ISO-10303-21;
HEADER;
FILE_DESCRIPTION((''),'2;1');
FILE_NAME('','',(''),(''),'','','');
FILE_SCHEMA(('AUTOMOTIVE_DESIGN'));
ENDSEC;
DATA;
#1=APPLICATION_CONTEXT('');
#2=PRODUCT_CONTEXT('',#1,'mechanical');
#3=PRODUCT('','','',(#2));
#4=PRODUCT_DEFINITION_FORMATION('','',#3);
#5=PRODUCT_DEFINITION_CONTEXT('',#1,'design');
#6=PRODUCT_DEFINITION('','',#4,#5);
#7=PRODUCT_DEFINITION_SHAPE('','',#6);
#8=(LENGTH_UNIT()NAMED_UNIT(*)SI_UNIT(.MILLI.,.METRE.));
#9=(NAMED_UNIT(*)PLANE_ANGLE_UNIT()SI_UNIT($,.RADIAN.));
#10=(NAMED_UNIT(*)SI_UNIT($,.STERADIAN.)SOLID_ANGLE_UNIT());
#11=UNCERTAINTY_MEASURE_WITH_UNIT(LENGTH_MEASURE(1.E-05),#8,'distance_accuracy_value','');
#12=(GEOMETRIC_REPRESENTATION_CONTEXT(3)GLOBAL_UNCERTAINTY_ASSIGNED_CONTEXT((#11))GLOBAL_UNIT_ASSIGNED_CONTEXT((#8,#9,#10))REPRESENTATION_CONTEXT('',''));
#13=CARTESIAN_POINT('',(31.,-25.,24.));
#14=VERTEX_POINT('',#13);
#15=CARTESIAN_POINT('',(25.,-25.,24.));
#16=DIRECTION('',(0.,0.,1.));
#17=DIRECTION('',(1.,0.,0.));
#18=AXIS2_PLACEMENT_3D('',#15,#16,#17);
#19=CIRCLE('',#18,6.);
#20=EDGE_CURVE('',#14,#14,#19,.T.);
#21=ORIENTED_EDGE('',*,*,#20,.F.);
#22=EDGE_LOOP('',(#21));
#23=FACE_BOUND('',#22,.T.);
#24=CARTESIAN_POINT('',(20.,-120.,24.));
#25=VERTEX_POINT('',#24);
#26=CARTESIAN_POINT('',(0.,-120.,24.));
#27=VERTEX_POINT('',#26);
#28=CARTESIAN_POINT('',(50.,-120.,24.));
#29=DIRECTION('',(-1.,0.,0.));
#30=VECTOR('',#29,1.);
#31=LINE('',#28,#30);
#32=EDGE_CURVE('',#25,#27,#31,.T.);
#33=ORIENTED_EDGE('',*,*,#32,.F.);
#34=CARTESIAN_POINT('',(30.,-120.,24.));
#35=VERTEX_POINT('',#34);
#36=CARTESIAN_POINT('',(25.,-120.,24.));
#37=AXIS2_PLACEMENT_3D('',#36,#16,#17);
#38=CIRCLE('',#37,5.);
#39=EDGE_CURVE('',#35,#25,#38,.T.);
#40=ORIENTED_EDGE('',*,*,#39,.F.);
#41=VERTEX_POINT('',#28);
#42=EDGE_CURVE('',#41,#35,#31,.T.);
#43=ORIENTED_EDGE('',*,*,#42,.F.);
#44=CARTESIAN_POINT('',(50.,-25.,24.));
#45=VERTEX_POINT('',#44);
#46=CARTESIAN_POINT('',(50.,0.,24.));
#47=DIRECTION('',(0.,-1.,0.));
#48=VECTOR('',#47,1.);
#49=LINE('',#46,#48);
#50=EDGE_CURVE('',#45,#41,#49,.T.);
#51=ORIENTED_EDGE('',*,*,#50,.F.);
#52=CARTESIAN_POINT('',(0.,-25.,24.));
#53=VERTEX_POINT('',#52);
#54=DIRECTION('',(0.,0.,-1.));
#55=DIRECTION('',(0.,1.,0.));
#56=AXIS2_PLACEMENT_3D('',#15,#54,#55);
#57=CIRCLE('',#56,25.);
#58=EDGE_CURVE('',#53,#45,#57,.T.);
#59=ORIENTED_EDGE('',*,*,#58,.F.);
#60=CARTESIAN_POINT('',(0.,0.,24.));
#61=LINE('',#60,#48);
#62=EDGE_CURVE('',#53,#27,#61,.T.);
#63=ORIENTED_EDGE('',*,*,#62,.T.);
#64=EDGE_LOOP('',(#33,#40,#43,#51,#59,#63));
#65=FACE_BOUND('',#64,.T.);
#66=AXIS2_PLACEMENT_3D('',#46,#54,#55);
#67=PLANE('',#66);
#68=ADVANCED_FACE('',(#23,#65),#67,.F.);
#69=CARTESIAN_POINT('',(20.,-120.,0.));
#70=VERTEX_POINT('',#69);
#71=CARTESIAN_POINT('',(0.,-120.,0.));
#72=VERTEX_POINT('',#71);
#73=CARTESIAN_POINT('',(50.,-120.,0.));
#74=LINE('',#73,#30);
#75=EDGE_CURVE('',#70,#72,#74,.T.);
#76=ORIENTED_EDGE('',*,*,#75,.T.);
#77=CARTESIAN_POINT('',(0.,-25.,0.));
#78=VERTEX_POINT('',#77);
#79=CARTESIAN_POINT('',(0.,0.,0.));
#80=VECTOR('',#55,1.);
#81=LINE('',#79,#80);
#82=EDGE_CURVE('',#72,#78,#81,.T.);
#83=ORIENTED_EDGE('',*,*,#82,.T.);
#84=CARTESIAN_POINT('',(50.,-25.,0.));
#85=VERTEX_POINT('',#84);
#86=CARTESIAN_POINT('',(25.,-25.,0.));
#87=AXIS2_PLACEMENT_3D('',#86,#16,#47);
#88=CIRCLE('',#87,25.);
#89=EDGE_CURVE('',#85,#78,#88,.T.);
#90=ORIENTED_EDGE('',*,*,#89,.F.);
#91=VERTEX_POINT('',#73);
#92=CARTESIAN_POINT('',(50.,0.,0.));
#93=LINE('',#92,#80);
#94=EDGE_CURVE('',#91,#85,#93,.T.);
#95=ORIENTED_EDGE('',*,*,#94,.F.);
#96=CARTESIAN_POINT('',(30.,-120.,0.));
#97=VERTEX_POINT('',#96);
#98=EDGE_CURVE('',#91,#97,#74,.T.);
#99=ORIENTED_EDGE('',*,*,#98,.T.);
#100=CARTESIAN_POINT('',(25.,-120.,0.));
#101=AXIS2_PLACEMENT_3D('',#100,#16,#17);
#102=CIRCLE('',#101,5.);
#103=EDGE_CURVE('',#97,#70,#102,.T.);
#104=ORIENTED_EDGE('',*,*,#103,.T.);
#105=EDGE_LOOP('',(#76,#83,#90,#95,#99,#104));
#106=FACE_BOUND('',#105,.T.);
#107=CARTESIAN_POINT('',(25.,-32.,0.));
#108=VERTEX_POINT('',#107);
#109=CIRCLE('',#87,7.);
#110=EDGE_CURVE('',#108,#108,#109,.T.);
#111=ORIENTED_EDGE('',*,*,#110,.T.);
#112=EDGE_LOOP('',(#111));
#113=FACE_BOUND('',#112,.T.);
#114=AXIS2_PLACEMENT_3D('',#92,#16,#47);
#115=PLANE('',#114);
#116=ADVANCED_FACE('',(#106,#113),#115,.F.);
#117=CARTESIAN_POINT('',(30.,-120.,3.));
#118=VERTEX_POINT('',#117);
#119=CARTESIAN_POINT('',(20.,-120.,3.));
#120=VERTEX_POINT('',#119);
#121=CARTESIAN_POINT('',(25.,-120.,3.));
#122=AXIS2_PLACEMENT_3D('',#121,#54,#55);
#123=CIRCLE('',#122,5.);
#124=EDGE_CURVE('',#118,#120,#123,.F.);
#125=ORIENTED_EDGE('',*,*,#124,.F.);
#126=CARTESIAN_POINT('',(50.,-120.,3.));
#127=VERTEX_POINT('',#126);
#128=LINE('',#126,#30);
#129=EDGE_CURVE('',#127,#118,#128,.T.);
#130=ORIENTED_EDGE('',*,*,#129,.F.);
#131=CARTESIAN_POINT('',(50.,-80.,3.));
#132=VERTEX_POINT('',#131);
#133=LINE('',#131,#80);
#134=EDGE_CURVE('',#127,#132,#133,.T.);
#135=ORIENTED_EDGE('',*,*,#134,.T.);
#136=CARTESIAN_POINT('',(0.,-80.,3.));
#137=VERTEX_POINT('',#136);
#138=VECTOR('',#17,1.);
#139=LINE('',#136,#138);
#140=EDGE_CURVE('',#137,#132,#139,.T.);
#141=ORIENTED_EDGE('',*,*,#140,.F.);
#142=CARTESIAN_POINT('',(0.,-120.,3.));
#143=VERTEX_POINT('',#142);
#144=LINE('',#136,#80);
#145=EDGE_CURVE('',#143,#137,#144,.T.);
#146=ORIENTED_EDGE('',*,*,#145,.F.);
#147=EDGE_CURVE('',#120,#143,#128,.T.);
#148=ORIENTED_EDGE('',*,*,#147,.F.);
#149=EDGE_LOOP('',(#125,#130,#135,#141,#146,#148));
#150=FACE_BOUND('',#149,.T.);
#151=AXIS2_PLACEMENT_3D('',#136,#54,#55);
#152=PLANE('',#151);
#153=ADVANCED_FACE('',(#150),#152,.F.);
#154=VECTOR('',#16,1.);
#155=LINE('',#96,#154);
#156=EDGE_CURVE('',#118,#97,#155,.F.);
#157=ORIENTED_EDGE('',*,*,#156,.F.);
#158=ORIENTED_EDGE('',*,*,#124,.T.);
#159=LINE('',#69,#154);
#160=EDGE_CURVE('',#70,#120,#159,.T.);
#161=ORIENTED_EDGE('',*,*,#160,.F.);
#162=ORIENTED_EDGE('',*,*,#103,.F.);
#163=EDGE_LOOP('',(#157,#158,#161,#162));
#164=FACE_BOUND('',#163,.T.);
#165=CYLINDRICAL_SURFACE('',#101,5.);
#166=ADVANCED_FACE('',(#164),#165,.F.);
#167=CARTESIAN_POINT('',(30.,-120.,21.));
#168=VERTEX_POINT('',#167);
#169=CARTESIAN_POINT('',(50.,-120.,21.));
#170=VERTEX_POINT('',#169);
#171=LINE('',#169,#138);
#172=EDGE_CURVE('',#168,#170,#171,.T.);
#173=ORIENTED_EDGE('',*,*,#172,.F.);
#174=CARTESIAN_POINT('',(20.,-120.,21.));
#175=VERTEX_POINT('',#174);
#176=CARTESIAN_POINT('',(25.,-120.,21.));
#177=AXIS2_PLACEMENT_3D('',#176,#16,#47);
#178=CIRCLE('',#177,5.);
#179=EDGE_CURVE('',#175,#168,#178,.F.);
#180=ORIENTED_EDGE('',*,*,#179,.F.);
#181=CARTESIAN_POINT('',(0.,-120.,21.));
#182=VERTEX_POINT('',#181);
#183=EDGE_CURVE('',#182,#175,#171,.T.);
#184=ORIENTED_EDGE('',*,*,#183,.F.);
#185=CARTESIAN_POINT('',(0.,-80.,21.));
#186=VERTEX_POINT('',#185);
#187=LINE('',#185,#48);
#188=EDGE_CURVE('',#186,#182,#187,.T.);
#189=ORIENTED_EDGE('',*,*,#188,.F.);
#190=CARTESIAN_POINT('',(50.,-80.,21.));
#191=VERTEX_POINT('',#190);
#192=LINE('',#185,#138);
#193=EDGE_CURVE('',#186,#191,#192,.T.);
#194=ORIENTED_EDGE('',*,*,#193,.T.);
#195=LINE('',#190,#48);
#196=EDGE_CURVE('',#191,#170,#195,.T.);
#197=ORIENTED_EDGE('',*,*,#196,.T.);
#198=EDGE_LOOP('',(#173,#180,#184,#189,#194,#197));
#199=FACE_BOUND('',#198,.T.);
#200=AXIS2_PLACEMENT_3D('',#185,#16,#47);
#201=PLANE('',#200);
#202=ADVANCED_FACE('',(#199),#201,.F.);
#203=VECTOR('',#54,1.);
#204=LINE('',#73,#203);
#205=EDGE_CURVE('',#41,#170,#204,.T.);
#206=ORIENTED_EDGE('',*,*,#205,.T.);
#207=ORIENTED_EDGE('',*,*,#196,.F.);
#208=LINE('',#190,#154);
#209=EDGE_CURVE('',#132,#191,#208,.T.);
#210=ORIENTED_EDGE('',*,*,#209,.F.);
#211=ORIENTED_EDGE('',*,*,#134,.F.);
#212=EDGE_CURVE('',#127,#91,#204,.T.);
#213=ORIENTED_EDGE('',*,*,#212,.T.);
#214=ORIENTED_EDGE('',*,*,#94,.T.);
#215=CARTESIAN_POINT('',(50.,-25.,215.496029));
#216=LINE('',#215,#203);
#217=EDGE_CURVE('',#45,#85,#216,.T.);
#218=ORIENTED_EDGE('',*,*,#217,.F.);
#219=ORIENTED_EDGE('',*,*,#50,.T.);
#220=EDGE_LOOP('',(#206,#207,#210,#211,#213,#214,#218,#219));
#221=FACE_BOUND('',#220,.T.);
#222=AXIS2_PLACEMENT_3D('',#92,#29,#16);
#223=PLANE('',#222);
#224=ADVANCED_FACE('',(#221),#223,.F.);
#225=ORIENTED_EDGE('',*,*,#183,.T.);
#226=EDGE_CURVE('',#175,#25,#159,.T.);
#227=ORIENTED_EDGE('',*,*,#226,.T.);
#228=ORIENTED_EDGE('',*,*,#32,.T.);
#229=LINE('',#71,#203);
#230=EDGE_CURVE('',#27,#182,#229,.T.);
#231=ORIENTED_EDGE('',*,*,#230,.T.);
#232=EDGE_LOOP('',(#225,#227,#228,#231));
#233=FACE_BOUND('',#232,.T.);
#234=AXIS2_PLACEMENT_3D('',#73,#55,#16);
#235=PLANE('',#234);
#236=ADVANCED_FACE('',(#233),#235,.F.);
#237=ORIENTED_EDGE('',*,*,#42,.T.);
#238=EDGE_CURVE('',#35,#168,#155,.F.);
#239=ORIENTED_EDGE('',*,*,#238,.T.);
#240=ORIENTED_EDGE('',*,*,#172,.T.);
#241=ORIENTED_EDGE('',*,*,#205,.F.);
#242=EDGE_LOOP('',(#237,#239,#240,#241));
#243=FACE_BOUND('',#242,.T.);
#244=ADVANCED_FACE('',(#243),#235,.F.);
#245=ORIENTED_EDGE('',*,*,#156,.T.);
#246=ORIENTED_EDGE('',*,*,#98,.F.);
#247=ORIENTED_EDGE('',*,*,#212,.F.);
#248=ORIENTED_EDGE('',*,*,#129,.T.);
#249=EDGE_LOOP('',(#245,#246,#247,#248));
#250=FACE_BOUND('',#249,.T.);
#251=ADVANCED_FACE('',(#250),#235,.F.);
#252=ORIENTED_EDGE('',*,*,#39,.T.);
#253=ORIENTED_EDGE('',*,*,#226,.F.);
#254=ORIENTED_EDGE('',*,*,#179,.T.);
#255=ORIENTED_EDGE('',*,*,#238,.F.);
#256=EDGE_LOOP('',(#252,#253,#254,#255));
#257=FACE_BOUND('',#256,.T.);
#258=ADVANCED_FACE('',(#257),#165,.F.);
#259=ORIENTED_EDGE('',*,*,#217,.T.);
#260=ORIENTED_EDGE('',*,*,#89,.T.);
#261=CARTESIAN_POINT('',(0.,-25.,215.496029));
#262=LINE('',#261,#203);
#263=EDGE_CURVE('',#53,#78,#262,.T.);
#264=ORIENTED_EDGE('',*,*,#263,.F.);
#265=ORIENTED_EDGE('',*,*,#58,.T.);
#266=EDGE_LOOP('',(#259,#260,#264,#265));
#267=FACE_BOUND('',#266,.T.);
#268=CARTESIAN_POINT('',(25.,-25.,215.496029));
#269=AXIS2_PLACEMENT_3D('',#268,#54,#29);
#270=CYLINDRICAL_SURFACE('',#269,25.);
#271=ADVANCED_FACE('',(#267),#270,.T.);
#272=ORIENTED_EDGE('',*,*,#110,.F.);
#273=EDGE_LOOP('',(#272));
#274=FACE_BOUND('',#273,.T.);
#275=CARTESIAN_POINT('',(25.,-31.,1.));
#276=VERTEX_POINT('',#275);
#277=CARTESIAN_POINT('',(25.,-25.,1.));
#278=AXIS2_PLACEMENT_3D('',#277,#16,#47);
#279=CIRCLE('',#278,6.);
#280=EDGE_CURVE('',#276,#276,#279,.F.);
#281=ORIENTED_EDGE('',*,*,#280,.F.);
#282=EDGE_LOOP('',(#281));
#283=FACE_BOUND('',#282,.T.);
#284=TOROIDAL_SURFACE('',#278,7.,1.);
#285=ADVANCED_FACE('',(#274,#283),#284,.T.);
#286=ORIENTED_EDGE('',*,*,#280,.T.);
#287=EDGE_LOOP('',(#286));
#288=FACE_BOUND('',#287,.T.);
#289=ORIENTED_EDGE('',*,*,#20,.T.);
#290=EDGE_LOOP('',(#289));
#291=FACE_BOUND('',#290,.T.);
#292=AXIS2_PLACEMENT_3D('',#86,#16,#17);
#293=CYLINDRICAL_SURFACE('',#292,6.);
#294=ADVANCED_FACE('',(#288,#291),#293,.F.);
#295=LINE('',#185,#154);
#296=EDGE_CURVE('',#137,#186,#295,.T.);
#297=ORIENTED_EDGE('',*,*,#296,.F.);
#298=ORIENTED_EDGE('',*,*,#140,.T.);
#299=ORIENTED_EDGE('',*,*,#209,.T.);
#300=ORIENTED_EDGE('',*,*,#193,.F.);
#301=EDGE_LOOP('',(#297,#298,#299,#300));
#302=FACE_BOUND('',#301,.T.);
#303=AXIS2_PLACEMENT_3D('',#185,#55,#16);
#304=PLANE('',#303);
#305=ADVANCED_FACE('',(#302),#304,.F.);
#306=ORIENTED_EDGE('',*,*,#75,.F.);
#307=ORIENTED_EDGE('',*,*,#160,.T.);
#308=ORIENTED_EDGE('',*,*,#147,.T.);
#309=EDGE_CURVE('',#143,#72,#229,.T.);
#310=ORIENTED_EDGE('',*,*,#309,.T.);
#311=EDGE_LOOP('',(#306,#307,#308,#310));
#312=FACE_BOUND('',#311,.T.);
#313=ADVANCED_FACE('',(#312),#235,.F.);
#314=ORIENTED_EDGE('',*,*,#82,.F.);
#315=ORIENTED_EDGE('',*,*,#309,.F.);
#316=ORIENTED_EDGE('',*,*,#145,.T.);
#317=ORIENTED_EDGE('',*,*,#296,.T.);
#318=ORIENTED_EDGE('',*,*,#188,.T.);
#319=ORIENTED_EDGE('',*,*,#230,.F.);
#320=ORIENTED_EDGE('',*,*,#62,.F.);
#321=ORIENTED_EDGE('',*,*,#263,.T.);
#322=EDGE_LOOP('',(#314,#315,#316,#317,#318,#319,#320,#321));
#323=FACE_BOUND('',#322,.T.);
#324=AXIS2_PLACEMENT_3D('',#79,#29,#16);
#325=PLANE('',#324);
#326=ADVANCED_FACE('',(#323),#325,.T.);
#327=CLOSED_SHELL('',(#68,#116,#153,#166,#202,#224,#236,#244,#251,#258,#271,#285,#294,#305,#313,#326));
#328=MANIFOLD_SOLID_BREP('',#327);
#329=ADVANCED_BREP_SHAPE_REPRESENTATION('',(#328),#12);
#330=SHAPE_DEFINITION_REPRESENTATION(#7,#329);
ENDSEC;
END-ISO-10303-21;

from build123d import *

# Parameters (mm, degrees)
SKETCH1_W           = 24
SKETCH1_H           = 120
BOSS_EXTRUDE1_DEPTH = 50
SKETCH3_R           = 6
CUT_EXTRUDE1_DEPTH  = 133.196822957
SKETCH5_R           = 5
CUT_EXTRUDE4_DEPTH  = 133.196822957
SKETCH4_W           = 18
SKETCH4_H           = 80
CUT_EXTRUDE5_DEPTH  = 133.196822957
CUT_EXTRUDE7_START  = -24
CUT_EXTRUDE7_DEPTH  = 24
FILLET2_R           = 1


# Read off the part's stored shape, not the designer's step: Cut-Extrude7
with BuildPart() as part:
    # Sketch1 → Boss-Extrude1 (new body)
    with BuildSketch(Plane(origin=(0, 0, 0), x_dir=(0, 0, -1), z_dir=(1, 0, 0))):
        with Locations((-12, -60)):
            Rectangle(SKETCH1_W, SKETCH1_H)
    extrude(amount=BOSS_EXTRUDE1_DEPTH)

    # Sketch3 → Cut-Extrude1 (cut, through all)
    with BuildSketch(Plane.XY.offset(24)):
        with Locations((25, -25)):
            Circle(SKETCH3_R)
    extrude(amount=-CUT_EXTRUDE1_DEPTH, mode=Mode.SUBTRACT)

    # Sketch5 → Cut-Extrude4 (cut, through all)
    with BuildSketch(Plane.XY.offset(24)):
        with Locations((25, -120)):
            Circle(SKETCH5_R)
    extrude(amount=-CUT_EXTRUDE4_DEPTH, mode=Mode.SUBTRACT)

    # Sketch4 → Cut-Extrude5 (cut, through all)
    with BuildSketch(Plane(origin=(50, 0, 0), x_dir=(0, 0, -1), z_dir=(1, 0, 0))):
        with Locations((-12, -120)):
            Rectangle(SKETCH4_W, SKETCH4_H)
    extrude(amount=-CUT_EXTRUDE5_DEPTH, mode=Mode.SUBTRACT)

    # Cut-Extrude7 outline → Cut-Extrude7 (cut)
    with BuildSketch(Plane.XY.offset(24).offset(CUT_EXTRUDE7_START)):
        with BuildLine():
            Line((0, 0), (0, -25))
            ThreePointArc((0, -25), (7.32233047, -7.32233047), (25, 0))
            Line((25, 0), (0, 0))
        make_face()
        with BuildLine():
            Line((50, 0), (25, 0))
            ThreePointArc((25, 0), (42.67766953, -7.32233047), (50, -25))
            Line((50, -25), (50, 0))
        make_face()
    extrude(amount=CUT_EXTRUDE7_DEPTH, mode=Mode.SUBTRACT)

    # Fillet2
    fillet2_edges = [part.edges().sort_by_distance(p)[0] for p in [
        (19, -25, 0),
    ]]
    fillet(fillet2_edges, radius=FILLET2_R)


solid = part.part
